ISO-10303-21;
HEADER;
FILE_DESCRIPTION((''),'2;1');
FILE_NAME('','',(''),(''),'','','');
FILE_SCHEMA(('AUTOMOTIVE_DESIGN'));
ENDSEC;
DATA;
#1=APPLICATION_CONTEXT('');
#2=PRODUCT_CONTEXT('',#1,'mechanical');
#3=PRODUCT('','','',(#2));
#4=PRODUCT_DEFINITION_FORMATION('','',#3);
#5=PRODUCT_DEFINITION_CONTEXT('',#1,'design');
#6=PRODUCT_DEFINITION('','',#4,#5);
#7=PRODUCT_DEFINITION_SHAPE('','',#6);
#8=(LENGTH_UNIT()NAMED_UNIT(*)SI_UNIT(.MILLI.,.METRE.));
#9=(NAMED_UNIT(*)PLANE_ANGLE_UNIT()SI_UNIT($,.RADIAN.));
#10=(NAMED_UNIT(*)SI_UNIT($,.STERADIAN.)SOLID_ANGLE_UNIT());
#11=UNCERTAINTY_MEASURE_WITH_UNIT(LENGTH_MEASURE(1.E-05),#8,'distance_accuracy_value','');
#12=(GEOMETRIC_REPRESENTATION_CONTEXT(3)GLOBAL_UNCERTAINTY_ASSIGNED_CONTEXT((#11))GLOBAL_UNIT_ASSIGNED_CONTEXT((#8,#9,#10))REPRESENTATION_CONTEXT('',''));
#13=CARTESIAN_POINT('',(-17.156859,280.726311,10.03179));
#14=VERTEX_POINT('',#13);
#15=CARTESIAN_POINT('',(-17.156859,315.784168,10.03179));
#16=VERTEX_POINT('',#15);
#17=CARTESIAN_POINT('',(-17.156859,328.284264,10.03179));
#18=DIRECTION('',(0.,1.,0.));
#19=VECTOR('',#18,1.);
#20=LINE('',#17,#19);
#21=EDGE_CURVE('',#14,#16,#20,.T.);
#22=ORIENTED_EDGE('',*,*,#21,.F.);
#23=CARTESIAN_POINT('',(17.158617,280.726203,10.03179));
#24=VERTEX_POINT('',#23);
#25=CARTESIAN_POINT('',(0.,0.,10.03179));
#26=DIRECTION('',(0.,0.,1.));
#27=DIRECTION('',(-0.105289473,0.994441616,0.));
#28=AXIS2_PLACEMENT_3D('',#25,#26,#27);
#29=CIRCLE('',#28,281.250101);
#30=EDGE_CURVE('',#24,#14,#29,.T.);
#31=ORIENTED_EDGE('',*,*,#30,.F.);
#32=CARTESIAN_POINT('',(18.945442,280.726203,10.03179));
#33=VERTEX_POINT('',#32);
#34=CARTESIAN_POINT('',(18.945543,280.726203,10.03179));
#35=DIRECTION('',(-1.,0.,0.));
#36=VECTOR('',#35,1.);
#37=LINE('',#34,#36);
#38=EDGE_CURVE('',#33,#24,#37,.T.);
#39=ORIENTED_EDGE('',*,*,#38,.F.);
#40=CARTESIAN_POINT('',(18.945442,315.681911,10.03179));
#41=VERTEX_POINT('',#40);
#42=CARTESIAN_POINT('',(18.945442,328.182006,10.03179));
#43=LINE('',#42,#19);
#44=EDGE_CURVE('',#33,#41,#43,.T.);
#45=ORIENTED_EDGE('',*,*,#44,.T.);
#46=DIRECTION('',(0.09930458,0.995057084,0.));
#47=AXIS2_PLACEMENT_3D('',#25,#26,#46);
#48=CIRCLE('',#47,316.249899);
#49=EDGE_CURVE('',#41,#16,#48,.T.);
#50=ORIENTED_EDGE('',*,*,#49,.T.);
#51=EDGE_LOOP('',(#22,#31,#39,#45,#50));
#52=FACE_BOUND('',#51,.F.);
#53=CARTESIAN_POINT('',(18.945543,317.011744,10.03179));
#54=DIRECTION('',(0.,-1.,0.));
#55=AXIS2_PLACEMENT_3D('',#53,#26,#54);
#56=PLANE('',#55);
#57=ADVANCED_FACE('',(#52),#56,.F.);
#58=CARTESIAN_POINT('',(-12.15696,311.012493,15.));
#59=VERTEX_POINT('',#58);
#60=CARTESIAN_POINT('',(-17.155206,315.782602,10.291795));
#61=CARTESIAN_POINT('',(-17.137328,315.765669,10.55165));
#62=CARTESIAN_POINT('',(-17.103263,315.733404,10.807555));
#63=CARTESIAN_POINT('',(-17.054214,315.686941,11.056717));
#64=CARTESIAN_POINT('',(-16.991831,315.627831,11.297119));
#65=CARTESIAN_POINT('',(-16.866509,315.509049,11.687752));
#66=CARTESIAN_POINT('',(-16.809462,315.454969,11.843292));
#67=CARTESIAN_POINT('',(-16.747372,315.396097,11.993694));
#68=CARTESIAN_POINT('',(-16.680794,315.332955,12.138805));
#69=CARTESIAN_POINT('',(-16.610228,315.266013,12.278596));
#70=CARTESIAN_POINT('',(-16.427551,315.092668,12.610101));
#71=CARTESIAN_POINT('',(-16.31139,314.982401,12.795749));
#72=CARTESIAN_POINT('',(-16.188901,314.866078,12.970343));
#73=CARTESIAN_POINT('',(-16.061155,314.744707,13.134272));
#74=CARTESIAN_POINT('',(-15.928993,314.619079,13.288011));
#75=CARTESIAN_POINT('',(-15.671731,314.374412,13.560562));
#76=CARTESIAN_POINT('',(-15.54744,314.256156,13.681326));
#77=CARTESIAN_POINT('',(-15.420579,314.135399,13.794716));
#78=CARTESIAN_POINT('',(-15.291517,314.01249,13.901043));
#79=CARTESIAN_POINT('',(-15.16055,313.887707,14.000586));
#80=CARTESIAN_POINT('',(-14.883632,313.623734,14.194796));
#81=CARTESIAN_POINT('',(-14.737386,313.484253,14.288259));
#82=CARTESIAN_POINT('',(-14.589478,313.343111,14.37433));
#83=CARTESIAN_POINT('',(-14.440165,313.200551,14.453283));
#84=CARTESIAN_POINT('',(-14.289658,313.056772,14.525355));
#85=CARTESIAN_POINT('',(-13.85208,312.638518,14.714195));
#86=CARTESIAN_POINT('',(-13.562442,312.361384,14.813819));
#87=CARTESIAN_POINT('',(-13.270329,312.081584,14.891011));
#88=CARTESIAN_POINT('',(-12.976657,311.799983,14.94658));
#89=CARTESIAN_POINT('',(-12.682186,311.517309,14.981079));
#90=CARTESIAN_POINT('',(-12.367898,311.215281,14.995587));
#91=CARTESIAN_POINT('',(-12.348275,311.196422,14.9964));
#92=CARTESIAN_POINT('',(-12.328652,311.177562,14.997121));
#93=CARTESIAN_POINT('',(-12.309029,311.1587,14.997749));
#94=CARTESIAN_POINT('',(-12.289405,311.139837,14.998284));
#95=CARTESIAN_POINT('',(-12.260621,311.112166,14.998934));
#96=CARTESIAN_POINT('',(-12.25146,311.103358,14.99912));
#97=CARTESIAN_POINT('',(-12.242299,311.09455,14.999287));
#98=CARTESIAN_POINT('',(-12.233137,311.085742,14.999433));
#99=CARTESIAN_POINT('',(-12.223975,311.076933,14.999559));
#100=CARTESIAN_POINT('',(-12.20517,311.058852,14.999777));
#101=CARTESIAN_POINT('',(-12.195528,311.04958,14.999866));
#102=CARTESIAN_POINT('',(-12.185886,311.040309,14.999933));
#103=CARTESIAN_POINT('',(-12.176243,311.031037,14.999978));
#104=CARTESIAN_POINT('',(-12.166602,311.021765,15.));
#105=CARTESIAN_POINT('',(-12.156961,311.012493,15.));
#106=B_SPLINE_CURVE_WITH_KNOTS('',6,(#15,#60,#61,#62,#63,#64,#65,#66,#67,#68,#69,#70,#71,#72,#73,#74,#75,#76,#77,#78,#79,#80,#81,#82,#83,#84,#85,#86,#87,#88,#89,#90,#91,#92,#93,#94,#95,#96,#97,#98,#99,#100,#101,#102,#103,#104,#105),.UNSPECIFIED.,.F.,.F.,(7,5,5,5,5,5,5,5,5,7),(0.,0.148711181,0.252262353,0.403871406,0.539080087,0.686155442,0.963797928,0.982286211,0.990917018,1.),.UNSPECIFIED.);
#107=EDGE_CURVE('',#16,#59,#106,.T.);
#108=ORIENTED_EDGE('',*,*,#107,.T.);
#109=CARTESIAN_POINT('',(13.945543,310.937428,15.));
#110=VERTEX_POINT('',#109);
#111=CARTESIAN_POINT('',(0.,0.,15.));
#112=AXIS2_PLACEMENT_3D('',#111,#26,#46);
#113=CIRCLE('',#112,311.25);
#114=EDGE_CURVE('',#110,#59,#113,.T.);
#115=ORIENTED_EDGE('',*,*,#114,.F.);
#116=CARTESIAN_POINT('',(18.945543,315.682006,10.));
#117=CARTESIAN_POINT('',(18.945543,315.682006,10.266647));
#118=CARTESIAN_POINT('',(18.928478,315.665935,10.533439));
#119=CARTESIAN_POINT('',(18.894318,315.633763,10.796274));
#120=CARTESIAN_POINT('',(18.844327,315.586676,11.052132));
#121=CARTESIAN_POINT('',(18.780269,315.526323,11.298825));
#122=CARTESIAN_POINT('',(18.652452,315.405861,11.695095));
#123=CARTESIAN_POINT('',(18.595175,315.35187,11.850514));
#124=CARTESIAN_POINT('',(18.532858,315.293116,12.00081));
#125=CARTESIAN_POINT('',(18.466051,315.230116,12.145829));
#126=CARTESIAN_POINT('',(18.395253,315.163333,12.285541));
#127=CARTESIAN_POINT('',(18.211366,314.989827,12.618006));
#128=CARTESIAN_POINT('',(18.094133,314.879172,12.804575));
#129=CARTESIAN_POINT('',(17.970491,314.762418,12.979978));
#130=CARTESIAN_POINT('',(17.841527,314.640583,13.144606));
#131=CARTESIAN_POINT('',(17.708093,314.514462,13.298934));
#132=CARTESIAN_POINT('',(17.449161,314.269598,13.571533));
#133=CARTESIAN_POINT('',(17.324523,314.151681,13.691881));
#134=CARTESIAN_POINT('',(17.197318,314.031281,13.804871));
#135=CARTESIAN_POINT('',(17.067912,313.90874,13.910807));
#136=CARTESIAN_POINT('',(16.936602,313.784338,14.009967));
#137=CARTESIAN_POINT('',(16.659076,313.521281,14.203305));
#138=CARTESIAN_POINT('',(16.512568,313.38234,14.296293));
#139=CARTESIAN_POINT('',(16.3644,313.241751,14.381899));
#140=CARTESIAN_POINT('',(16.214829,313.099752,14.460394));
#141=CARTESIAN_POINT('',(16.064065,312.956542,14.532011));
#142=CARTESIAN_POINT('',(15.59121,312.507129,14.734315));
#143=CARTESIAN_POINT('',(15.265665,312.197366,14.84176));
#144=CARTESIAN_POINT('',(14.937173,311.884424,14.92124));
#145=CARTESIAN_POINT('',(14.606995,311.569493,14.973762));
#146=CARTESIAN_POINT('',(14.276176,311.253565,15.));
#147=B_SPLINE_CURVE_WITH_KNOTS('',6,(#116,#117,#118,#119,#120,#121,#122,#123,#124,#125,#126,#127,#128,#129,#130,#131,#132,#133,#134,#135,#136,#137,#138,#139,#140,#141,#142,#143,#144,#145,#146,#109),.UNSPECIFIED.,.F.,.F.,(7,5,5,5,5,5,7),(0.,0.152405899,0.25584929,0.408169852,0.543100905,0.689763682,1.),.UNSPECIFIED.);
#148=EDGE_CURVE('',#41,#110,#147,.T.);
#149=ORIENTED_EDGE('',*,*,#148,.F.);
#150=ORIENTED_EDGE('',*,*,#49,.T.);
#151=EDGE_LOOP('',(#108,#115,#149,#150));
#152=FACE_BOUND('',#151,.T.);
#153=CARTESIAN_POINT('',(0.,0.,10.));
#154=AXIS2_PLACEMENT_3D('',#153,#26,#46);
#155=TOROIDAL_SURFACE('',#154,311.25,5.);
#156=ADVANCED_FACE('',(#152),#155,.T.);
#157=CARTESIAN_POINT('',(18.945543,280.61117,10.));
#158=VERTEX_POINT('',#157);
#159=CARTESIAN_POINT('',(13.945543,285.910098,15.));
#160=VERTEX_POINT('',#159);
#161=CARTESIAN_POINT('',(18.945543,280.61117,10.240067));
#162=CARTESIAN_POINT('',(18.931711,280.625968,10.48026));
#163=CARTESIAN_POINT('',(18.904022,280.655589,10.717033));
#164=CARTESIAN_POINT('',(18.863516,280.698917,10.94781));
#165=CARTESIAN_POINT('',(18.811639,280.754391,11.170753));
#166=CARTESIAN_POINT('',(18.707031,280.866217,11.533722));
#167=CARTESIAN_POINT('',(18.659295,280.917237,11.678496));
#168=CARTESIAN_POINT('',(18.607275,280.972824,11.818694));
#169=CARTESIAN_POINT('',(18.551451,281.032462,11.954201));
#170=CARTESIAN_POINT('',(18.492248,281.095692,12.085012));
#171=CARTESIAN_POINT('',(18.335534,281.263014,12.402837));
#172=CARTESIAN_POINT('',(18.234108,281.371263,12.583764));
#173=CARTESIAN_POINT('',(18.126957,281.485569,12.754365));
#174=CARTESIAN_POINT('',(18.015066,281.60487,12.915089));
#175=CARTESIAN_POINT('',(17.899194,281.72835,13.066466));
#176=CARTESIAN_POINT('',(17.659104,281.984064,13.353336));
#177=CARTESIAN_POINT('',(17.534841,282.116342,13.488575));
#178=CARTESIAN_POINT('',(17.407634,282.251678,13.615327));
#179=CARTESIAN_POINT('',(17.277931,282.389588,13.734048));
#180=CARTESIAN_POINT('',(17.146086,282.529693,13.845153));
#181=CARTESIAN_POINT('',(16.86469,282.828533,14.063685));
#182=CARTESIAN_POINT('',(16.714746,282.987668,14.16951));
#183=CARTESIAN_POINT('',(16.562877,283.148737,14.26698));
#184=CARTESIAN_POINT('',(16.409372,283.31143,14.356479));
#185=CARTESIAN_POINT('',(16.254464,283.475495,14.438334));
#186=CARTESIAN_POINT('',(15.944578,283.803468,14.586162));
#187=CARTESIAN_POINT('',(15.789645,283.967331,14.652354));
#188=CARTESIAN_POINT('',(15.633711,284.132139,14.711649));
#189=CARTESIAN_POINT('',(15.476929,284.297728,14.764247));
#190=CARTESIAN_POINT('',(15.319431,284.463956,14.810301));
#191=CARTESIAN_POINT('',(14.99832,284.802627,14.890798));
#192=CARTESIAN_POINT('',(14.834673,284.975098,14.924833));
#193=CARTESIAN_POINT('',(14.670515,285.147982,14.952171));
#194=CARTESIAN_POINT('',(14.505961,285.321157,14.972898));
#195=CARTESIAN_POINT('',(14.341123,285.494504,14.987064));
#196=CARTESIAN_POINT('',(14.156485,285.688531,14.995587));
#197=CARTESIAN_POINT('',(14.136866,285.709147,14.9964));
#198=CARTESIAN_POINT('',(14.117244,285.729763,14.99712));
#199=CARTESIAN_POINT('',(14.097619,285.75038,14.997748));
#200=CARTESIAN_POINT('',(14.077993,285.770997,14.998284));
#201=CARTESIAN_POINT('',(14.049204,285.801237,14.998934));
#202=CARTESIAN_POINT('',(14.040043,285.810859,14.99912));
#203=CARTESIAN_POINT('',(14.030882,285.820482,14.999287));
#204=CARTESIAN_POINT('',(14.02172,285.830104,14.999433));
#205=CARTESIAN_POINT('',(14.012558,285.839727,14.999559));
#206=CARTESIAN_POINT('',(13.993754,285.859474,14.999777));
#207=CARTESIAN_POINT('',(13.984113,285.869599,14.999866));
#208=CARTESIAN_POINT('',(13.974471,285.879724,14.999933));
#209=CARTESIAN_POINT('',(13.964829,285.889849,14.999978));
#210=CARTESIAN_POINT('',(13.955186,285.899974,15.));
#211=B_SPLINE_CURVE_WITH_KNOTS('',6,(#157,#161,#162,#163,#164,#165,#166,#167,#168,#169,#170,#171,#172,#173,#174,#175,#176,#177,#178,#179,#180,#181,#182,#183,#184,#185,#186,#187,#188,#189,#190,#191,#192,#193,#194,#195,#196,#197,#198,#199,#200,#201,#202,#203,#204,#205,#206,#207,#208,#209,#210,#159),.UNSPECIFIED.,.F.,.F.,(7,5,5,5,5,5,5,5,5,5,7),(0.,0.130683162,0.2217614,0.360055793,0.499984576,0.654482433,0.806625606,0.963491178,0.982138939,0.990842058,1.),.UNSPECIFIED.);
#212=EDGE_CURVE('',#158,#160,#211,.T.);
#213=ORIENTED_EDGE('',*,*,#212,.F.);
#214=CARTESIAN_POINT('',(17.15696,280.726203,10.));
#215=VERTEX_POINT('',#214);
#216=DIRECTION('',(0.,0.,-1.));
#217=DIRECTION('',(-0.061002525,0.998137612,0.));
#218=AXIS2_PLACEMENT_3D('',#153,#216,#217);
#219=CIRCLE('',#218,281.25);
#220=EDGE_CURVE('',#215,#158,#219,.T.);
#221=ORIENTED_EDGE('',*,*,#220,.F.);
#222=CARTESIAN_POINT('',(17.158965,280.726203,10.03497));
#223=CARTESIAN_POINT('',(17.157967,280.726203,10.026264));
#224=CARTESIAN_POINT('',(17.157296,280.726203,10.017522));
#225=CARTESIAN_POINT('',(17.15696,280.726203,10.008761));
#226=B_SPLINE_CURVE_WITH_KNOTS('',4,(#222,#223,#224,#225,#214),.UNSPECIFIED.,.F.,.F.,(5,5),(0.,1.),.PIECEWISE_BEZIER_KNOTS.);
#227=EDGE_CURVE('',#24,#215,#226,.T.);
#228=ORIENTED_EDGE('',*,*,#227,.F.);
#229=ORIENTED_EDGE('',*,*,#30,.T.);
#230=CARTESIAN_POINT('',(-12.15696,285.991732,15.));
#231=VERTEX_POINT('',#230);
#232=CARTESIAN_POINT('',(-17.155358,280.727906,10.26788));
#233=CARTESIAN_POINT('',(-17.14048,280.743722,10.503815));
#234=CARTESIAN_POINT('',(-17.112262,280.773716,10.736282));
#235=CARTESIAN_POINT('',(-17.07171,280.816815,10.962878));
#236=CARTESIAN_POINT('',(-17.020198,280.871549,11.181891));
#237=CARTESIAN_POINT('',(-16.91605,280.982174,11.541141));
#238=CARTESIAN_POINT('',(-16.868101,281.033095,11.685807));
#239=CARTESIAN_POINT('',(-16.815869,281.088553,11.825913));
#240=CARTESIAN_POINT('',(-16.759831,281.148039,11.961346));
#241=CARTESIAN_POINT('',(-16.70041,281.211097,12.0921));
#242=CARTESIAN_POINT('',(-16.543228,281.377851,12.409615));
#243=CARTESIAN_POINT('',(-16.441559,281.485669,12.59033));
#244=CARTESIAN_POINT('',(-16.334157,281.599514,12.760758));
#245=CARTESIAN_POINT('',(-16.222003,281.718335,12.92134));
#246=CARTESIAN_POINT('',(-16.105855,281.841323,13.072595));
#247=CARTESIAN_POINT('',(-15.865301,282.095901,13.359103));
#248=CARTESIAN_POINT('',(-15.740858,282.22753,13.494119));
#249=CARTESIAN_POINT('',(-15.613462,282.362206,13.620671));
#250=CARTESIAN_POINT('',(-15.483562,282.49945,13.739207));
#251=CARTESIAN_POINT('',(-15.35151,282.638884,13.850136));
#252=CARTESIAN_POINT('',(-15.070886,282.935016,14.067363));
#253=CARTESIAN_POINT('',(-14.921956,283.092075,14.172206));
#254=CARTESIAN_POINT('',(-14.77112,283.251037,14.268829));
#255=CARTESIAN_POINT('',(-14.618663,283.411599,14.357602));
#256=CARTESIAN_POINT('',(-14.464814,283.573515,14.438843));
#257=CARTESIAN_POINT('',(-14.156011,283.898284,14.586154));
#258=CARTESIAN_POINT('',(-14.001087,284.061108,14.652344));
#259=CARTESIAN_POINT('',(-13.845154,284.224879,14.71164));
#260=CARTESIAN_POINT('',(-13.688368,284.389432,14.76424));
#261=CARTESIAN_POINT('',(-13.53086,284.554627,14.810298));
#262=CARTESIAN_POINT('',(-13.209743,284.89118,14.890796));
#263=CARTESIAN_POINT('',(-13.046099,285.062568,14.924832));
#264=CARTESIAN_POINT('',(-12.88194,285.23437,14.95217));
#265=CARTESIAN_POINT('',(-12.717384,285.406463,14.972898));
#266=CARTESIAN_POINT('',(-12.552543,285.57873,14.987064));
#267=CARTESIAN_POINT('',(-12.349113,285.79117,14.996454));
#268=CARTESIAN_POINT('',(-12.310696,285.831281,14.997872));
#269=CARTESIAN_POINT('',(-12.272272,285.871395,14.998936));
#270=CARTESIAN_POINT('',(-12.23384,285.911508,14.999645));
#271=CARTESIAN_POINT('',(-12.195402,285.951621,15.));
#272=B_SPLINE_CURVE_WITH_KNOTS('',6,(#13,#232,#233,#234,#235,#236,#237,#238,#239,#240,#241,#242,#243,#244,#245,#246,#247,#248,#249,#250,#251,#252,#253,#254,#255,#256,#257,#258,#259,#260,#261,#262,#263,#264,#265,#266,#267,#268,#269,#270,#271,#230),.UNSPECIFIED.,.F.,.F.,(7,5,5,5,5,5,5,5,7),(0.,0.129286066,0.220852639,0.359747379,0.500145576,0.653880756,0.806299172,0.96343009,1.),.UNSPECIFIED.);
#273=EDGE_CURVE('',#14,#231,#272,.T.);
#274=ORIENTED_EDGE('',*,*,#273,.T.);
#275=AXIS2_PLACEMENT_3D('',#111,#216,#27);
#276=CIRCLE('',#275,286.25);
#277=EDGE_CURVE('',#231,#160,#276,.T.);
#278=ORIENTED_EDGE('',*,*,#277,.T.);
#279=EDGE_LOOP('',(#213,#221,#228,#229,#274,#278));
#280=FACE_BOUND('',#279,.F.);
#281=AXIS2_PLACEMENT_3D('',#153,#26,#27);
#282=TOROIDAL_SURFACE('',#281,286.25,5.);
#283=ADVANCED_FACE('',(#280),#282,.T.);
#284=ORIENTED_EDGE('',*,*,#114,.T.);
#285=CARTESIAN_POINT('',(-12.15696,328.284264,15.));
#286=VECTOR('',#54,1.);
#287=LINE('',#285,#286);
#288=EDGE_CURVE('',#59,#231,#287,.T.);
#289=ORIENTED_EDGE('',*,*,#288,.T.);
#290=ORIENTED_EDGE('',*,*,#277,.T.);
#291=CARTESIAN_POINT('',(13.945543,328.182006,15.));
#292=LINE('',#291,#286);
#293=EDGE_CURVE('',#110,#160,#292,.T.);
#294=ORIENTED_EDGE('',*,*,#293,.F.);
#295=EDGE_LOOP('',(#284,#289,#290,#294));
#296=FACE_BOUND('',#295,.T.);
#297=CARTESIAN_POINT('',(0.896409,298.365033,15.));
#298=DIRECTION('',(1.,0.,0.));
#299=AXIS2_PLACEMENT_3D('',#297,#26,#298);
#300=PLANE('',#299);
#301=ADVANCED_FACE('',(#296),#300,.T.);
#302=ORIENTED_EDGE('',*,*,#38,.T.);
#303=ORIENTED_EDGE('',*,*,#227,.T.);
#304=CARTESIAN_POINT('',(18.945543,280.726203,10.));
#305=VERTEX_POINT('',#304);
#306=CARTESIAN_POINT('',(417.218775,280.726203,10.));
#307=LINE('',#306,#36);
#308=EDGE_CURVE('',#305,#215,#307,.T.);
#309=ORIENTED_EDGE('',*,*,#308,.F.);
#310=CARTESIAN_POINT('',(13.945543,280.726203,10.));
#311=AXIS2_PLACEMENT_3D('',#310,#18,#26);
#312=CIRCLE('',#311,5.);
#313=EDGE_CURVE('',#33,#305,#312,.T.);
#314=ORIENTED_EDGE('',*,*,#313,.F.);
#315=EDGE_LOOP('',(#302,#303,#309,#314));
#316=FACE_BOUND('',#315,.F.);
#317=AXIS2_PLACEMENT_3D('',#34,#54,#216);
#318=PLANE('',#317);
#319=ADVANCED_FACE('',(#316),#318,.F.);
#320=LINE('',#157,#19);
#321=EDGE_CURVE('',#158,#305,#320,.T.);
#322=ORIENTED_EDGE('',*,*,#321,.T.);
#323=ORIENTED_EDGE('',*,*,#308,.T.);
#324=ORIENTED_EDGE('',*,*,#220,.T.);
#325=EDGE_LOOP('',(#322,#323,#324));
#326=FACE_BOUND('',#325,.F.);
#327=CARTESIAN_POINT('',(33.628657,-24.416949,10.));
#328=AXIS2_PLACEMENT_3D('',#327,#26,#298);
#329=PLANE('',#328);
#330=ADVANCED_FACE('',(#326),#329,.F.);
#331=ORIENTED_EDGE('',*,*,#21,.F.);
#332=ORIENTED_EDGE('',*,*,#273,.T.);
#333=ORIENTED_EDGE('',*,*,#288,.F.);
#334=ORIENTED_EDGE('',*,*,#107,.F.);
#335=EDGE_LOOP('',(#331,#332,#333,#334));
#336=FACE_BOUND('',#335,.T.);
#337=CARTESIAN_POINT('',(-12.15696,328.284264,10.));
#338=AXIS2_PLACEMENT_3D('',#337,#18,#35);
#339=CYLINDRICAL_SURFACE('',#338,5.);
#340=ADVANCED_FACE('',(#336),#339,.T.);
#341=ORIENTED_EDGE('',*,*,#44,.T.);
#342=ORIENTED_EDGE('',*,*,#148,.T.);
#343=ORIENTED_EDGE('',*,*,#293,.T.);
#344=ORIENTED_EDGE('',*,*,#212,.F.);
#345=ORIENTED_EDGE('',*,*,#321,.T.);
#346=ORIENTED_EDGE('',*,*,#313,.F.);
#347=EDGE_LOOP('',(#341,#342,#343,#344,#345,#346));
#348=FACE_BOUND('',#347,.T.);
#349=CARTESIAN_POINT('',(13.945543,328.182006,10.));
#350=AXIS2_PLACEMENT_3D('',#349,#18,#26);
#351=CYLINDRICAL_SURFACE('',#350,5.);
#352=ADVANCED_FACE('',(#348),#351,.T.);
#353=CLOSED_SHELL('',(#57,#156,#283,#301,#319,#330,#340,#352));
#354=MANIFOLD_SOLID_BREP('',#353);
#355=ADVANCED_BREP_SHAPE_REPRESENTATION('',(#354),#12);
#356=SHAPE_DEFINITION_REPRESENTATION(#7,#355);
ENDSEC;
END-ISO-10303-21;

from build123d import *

# Parameters (mm, degrees)
F0_R        = 316.25
F0_R_2      = 281.25
F1_DEPTH    = 10
F3_DEPTH    = 5
F4_W        = 212.0740879327
F4_H        = 34.9558026777
F4_W_2      = 196.2447150651
F4_H_2      = 35.0580604298
F5_DEPTH    = 84
F6_W        = 1.3297378083
F6_H        = 10.0317904726
F7_DEPTH    = 42
F8_T1_DEPTH = 60.0580604298
F8_T3_DEPTH = 60.0708356762
F8_T6_ANGLE = 12.4528096898
F8_T8_ANGLE = 11.0736814867


# Not quite as in the source:
# - a fillet or chamfer that OpenCascade refuses, or shapes differently, is made with other operations: its cross-section is extruded or revolved along the edge and cut away or added


with BuildPart() as f1:
    # F0 (on Top) → F1 (new body)
    with BuildSketch(Plane.XY):
        Circle(F0_R)
        Circle(F0_R_2, mode=Mode.SUBTRACT)
    extrude(amount=F1_DEPTH)

    # F2 (on face) → F3 (join)
    with BuildSketch(Plane.XY.offset(10)):
        with BuildLine():
            ThreePointArc((18.9455430955, 315.6820059757), (0.8957518585, 316.2487314261), (-17.1569601592, 315.7842637278))
            Line((-17.1569601592, 315.7842637278), (-17.1569601592, 280.726203298))
            ThreePointArc((-17.1569601592, 280.726203298), (0.8961391508, 281.2485723246), (18.9455430955, 280.6111702994))
            Line((18.9455430955, 280.6111702994), (18.9455430955, 315.6820059757))
        make_face()
    extrude(amount=F3_DEPTH)

    # F4 (on face) → F5 (cut)
    with BuildSketch(Plane.XY.offset(10)):
        Polygon((417.2187745571, -329.5601010323), (417.2187745571, 280.726203298), (231.0196310282, 280.726203298), (18.9455430955, 280.726203298), (-17.1569601592, 280.726203298), (-213.4016752243, 280.726203298), (-349.9614596367, 280.726203298), (-349.9614596367, -329.5601010323), align=None)
        with Locations((124.9825870618, 298.2041046368)):
            Rectangle(F4_W, F4_H)
        with Locations((-115.2793176918, 298.2552335129)):
            Rectangle(F4_W_2, F4_H_2)
    extrude(amount=-F5_DEPTH, mode=Mode.SUBTRACT)

    # F6 (on face) → F7 (cut)
    with BuildSketch(Plane.YZ.offset(18.9455430955)):
        Polygon((280.726203298, 10), (280.726203298, 0), (315.6820059757, 0), (315.6820059757, 10.0317904726), (280.726203298, 10.0317904726), align=None)
        with Locations((316.3468748798, 5.0158952363)):
            Rectangle(F6_W, F6_H)
    extrude(amount=-F7_DEPTH, mode=Mode.SUBTRACT)

    # F8: fillet of radius 5 on 4 edges, made by hand

    # F8_s2 → F8_t1 (cut)
    with BuildSketch(Plane.XZ.offset(-328.2842637278)):
        with BuildLine():
            ThreePointArc((-17.1569601592, 10), (-15.6924940651, 13.5355339059), (-12.1569601592, 15))
            Line((-12.1569601592, 15), (-17.1569601592, 15))
            Line((-17.1569601592, 15), (-17.1569601592, 10))
        make_face()
    extrude(amount=F8_T1_DEPTH, mode=Mode.SUBTRACT)

    # F8_s4 → F8_t3 (cut)
    with BuildSketch(Plane.XZ.offset(-328.1820059757)):
        with BuildLine():
            ThreePointArc((13.9455430955, 15), (17.4810770014, 13.5355339059), (18.9455430955, 10))
            Line((18.9455430955, 10), (18.9455430955, 15))
            Line((18.9455430955, 15), (13.9455430955, 15))
        make_face()
    extrude(amount=F8_T3_DEPTH, mode=Mode.SUBTRACT)

    # F8_s5 → F8_t6 (revolve, cut)
    with BuildSketch(Plane(origin=(0, 0, 0), x_dir=(0, 0, 1), z_dir=(-0.9944416157, -0.1052894726, 0))):
        with BuildLine():
            ThreePointArc((15, 286.25), (13.5355339059, 282.7144660941), (10, 281.25))
            Line((10, 281.25), (15, 281.25))
            Line((15, 281.25), (15, 286.25))
        make_face()
    revolve(axis=Axis((0, 0, 15), (0, 0, -1)), revolution_arc=F8_T6_ANGLE, mode=Mode.SUBTRACT)

    # F8_s7 → F8_t8 (revolve, cut)
    with BuildSketch(Plane(origin=(0, 0, 0), x_dir=(0, 0, 1), z_dir=(0.995057084, -0.0993045796, 0))):
        with BuildLine():
            ThreePointArc((10, -316.25), (13.5355339059, -314.7855339059), (15, -311.25))
            Line((15, -311.25), (15, -316.25))
            Line((15, -316.25), (10, -316.25))
        make_face()
    revolve(axis=Axis((0, 0, 15), (0, 0, 1)), revolution_arc=F8_T8_ANGLE, mode=Mode.SUBTRACT)


solid = f1.part
